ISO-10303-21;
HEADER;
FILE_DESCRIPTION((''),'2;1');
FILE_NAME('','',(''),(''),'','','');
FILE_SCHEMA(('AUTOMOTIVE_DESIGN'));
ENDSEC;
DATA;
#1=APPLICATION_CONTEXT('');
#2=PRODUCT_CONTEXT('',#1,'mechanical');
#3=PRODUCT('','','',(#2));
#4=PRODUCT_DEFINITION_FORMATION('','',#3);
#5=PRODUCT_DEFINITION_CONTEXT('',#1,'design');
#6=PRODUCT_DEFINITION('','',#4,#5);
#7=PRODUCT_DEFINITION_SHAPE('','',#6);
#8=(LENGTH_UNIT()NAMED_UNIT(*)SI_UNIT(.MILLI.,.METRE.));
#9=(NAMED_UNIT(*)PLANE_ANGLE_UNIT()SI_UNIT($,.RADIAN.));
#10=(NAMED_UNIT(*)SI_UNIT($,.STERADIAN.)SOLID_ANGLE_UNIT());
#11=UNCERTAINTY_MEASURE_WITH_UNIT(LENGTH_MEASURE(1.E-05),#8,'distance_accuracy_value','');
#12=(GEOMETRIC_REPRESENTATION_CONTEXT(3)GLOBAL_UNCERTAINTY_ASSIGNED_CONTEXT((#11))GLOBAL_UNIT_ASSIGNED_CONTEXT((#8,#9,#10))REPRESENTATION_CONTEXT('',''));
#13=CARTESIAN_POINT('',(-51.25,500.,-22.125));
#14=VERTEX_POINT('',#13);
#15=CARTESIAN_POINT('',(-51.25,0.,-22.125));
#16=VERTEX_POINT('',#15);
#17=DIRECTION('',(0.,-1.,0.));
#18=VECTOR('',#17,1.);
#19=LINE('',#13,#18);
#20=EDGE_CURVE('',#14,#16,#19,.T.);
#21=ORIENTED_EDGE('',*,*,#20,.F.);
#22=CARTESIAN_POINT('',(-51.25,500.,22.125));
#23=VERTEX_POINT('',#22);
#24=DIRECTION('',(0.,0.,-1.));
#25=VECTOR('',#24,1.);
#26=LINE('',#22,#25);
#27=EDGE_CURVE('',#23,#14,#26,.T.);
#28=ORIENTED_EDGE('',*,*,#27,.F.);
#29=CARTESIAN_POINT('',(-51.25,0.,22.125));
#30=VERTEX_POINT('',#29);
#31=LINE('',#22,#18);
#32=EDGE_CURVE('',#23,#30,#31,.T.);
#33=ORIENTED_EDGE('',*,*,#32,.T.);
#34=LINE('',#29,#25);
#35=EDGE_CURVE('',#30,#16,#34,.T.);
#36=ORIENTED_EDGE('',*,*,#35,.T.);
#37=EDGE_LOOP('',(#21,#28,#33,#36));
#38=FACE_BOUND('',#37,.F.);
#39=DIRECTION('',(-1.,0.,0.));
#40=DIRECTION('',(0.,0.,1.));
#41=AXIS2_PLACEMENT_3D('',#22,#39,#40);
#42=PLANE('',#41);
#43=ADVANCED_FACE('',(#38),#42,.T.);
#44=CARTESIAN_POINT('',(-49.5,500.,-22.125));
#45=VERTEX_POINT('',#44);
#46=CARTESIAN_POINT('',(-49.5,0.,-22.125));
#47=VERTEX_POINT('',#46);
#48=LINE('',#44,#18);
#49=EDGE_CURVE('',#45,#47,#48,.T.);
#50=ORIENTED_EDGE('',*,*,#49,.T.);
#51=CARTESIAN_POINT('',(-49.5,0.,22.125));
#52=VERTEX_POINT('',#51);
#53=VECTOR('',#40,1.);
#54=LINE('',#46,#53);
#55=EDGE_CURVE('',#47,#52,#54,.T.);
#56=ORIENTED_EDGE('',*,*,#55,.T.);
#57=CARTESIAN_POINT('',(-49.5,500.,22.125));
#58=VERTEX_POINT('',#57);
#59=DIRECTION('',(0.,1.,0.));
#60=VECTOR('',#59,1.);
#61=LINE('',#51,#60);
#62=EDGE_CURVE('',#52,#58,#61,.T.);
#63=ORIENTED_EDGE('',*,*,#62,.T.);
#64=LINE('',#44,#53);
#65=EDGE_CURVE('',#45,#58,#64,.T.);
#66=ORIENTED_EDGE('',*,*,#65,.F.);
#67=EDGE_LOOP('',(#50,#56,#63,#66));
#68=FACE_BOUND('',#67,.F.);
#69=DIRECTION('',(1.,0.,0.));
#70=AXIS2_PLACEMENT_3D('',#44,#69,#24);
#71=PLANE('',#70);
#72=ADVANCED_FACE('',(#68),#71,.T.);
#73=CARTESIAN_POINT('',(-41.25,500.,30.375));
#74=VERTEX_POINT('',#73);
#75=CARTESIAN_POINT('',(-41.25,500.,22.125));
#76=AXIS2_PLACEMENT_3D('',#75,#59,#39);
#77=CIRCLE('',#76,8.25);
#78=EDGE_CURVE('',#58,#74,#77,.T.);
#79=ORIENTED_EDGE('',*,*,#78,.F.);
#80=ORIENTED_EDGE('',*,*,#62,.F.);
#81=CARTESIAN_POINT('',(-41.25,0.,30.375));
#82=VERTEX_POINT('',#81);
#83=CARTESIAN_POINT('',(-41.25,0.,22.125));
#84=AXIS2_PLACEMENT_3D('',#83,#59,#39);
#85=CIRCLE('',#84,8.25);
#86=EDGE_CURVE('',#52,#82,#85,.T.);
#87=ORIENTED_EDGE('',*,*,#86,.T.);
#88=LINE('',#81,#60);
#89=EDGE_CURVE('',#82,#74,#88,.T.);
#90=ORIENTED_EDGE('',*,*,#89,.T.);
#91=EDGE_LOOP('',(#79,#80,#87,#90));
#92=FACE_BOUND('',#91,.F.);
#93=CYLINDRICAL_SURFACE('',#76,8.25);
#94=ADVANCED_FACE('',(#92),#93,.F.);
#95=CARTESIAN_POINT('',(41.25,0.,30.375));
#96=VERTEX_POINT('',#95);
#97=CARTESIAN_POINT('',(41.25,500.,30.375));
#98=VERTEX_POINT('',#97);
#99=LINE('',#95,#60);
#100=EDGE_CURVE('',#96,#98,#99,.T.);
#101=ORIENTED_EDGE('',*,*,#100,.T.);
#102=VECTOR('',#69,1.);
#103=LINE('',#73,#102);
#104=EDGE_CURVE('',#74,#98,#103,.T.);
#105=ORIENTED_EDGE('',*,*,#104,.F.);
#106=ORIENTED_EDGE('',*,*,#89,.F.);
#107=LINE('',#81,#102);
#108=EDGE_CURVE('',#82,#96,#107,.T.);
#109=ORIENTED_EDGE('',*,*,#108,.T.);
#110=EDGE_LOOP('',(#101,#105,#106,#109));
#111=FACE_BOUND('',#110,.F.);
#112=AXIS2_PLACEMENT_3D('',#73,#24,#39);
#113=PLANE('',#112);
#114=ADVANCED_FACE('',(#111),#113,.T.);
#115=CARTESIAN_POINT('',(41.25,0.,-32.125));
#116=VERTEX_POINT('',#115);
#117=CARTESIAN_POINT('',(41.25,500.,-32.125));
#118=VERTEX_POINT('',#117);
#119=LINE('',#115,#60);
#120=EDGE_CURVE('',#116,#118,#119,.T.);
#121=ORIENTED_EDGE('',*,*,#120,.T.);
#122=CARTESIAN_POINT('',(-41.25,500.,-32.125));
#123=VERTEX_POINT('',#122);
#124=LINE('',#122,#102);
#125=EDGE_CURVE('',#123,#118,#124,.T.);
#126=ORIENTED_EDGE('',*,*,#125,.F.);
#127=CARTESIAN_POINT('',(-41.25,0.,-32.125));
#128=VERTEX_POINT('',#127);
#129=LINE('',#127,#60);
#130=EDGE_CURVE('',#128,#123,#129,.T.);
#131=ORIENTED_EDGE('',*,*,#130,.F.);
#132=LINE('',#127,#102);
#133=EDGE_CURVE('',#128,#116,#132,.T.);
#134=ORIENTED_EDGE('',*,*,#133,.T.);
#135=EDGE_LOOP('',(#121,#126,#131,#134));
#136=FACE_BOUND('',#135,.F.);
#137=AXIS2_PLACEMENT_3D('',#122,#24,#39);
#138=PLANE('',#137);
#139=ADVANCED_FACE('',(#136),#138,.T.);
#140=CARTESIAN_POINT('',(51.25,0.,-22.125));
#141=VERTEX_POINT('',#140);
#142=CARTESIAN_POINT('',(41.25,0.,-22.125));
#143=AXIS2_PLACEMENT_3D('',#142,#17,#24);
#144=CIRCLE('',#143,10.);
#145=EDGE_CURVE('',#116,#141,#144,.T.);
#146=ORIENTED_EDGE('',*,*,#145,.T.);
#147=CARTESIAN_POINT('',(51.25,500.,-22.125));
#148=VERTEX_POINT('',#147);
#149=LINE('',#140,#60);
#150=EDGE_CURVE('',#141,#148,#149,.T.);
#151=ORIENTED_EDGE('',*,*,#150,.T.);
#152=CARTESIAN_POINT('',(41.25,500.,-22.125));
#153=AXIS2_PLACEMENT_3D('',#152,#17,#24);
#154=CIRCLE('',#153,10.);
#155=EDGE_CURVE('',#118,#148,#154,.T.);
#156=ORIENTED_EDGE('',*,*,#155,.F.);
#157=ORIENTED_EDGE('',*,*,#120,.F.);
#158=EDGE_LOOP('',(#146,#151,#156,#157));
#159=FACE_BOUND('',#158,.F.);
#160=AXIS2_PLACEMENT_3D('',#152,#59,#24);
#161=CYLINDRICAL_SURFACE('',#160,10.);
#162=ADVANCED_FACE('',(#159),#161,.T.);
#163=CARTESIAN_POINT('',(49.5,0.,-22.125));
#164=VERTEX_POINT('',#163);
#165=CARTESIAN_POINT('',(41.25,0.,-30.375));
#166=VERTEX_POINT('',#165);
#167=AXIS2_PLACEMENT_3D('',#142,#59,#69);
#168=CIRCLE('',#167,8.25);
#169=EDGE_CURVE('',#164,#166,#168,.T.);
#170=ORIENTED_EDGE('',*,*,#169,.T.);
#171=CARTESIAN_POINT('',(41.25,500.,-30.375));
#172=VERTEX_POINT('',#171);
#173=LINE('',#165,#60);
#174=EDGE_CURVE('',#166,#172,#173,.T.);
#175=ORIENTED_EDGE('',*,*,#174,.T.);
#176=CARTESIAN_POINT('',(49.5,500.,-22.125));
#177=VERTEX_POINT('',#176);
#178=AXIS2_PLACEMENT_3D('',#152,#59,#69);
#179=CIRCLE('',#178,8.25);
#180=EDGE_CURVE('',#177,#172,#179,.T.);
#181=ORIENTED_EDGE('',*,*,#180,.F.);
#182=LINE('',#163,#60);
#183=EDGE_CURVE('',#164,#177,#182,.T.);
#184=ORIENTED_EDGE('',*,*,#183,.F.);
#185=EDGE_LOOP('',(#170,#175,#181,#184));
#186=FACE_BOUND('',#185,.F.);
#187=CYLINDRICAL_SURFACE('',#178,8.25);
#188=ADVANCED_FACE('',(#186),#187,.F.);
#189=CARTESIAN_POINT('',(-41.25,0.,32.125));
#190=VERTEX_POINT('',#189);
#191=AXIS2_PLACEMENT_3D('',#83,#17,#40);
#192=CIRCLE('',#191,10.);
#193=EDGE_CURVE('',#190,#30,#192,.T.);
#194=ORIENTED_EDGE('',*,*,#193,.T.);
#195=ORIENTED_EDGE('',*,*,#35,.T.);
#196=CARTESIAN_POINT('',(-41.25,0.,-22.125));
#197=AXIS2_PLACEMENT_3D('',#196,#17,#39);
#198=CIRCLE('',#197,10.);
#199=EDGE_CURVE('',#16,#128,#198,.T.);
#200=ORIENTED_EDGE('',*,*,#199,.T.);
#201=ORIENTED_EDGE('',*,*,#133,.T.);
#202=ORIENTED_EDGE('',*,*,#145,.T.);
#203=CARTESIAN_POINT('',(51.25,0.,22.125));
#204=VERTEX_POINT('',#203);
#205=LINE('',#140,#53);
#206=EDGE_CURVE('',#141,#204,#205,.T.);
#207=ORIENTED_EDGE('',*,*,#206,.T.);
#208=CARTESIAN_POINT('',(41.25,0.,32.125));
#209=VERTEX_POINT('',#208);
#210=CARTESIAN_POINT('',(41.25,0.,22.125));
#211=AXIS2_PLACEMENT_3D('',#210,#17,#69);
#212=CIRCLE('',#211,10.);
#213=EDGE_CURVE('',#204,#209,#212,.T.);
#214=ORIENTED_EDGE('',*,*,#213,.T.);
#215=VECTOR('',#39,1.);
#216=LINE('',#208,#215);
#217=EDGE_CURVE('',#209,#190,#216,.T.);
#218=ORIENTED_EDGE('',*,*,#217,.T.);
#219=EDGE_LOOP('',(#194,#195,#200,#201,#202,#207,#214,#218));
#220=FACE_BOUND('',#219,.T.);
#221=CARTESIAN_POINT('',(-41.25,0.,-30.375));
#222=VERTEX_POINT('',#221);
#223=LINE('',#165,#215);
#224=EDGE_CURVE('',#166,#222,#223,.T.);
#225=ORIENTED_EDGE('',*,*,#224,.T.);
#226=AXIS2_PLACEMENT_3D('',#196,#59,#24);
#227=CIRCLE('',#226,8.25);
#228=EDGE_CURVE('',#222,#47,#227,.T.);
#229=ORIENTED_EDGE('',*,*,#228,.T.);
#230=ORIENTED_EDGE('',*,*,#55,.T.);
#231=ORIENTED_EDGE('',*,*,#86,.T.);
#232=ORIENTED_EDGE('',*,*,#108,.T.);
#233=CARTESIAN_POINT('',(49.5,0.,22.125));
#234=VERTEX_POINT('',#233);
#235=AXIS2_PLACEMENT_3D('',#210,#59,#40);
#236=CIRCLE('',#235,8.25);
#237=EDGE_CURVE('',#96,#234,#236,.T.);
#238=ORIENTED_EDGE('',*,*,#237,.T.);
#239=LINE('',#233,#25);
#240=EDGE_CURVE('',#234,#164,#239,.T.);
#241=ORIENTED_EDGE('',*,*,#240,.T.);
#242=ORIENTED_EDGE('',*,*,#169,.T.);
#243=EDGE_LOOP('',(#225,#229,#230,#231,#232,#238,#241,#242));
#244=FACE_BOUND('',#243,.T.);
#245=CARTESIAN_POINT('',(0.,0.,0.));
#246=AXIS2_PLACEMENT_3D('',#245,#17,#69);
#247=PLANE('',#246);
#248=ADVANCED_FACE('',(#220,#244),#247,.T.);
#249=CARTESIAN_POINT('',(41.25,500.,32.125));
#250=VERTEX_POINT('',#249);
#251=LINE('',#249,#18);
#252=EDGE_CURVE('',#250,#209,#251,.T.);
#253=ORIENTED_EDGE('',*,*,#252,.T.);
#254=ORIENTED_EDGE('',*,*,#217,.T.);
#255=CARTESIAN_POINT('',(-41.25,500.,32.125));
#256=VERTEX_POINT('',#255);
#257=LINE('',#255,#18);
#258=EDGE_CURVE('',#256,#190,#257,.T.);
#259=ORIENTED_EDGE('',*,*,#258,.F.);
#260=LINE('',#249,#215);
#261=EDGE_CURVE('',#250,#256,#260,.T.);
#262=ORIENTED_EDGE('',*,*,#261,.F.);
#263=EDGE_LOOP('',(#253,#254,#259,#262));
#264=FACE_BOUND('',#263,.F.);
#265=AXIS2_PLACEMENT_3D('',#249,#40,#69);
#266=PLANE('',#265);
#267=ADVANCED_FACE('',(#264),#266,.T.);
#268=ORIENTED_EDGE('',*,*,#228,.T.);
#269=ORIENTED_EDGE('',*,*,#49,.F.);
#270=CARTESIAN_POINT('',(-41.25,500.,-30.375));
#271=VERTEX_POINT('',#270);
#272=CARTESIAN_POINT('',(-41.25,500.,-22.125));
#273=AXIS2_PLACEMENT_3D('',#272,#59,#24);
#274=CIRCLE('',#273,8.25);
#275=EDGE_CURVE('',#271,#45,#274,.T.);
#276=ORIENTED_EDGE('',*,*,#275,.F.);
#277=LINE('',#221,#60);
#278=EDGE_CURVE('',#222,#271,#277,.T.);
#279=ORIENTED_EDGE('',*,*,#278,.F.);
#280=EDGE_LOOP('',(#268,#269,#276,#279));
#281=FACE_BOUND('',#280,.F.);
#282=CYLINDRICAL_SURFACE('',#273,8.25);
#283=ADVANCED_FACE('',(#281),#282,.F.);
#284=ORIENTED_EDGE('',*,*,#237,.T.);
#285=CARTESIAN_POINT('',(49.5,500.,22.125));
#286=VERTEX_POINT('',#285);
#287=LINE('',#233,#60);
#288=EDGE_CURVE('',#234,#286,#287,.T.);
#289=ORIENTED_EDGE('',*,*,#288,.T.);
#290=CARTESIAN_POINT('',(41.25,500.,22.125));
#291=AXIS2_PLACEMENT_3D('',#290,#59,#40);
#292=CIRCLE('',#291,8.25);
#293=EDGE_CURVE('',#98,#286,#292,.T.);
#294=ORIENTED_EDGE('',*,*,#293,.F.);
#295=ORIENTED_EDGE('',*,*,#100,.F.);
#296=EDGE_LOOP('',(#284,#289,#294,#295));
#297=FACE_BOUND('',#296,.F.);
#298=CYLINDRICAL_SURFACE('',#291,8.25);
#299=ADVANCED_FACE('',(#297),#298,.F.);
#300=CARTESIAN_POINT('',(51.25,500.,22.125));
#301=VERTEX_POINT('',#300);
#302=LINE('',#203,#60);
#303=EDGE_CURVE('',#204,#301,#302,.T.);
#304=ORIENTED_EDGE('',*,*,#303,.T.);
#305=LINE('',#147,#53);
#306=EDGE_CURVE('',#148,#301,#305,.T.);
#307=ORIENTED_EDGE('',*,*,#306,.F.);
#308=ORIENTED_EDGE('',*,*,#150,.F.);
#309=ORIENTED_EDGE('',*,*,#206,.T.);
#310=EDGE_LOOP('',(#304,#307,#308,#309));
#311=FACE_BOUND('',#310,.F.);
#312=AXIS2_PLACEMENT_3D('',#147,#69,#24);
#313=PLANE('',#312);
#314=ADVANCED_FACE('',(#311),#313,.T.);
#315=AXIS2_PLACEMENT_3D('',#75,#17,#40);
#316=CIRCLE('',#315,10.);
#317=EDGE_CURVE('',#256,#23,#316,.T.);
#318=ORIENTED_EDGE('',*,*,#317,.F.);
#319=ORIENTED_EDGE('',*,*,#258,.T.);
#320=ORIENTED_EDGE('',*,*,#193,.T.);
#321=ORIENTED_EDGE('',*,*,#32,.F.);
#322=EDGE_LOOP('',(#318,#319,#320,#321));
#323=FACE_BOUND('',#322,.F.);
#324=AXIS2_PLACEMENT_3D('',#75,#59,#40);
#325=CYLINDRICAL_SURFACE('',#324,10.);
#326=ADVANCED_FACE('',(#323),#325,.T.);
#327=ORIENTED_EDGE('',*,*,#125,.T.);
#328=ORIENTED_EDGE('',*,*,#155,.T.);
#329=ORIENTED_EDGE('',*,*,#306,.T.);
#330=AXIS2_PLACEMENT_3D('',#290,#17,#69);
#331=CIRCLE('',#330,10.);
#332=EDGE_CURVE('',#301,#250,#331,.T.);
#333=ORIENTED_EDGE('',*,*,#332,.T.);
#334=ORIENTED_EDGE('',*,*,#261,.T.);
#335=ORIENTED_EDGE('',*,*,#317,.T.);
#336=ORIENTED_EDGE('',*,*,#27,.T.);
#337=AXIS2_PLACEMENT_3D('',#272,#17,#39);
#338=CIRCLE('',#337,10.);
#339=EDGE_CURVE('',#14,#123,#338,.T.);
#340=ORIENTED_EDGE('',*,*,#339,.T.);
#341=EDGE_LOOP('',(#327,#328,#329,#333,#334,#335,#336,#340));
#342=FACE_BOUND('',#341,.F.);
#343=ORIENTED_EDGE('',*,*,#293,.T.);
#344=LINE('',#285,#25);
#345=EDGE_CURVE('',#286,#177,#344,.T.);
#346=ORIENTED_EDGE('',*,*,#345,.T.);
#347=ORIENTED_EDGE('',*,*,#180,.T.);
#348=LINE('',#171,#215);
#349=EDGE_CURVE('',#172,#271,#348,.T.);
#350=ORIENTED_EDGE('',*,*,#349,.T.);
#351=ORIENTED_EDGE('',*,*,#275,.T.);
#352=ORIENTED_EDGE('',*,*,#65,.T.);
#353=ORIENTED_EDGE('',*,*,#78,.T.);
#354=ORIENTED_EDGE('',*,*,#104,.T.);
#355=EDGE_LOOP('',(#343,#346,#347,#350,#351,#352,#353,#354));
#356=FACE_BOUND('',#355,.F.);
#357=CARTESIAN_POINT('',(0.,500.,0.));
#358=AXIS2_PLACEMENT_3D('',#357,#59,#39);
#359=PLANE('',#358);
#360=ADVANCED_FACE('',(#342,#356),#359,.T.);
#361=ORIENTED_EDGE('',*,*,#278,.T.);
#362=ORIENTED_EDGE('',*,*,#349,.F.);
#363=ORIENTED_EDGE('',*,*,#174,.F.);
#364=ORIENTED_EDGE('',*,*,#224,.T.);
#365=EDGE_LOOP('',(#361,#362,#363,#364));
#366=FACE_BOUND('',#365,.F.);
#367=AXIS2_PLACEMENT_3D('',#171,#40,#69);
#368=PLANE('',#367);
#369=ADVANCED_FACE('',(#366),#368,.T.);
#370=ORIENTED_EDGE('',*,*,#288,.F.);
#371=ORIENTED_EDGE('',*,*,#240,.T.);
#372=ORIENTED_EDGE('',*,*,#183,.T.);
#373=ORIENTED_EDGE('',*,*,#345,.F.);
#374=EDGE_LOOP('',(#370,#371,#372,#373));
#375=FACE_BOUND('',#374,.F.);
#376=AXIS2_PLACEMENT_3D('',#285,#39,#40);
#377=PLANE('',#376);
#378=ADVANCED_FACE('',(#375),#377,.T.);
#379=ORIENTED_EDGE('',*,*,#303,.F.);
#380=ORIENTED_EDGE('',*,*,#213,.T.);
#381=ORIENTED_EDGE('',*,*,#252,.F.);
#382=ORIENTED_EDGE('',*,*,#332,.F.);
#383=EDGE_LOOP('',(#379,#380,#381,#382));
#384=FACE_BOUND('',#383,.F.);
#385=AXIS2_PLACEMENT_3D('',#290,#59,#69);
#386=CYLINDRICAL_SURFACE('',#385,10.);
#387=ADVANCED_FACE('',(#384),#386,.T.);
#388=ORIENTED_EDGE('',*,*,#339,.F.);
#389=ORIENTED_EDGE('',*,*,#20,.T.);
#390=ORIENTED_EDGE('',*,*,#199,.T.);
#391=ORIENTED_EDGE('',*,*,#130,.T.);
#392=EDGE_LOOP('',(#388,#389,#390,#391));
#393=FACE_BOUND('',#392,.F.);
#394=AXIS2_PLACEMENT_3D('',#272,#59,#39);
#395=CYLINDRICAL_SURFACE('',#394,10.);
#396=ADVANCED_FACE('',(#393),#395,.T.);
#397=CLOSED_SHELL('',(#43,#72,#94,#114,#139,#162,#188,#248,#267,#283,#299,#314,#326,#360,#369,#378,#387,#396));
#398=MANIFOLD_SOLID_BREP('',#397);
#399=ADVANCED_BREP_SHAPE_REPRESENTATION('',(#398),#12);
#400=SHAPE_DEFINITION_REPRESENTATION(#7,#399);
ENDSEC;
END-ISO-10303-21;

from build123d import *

# Parameters (mm, degrees)
F1_DEPTH = 300


# Not quite as in the source:
# - a pattern or mirror of a feature is missing from the dataset's text; its kind, count and spacing are read off the source's solid


with BuildPart() as f1:
    # F0 (on Front) → F1 (new body)
    with BuildSketch(Plane.XZ):
        with BuildLine():
            ThreePointArc((51.25, 22.125), (48.3210678119, 29.1960678119), (41.25, 32.125))
            Line((41.25, 32.125), (-41.25, 32.125))
            ThreePointArc((-41.25, 32.125), (-48.3210678119, 29.1960678119), (-51.25, 22.125))
            Line((-51.25, 22.125), (-51.25, -22.125))
            ThreePointArc((-51.25, -22.125), (-48.3210678119, -29.1960678119), (-41.25, -32.125))
            Line((-41.25, -32.125), (41.25, -32.125))
            ThreePointArc((41.25, -32.125), (48.3210678119, -29.1960678119), (51.25, -22.125))
            Line((51.25, -22.125), (51.25, 22.125))
        make_face()
        with BuildLine():
            Line((-49.5, -22.125), (-49.5, 22.125))
            ThreePointArc((-49.5, 22.125), (-47.0836309448, 27.9586309448), (-41.25, 30.375))
            Line((-41.25, 30.375), (41.25, 30.375))
            ThreePointArc((41.25, 30.375), (47.0836309448, 27.9586309448), (49.5, 22.125))
            Line((49.5, 22.125), (49.5, -22.125))
            ThreePointArc((49.5, -22.125), (47.0836309448, -27.9586309448), (41.25, -30.375))
            Line((41.25, -30.375), (-41.25, -30.375))
            ThreePointArc((-41.25, -30.375), (-47.0836309448, -27.9586309448), (-49.5, -22.125))
        make_face(mode=Mode.SUBTRACT)
    extrude(amount=-F1_DEPTH)

    # F1_copies: F1 across plane


with BuildPart() as f1_1:
    add(f1.part)
    add(f1.part.mirror(Plane.ZX.offset(250)))


solid = f1_1.part
